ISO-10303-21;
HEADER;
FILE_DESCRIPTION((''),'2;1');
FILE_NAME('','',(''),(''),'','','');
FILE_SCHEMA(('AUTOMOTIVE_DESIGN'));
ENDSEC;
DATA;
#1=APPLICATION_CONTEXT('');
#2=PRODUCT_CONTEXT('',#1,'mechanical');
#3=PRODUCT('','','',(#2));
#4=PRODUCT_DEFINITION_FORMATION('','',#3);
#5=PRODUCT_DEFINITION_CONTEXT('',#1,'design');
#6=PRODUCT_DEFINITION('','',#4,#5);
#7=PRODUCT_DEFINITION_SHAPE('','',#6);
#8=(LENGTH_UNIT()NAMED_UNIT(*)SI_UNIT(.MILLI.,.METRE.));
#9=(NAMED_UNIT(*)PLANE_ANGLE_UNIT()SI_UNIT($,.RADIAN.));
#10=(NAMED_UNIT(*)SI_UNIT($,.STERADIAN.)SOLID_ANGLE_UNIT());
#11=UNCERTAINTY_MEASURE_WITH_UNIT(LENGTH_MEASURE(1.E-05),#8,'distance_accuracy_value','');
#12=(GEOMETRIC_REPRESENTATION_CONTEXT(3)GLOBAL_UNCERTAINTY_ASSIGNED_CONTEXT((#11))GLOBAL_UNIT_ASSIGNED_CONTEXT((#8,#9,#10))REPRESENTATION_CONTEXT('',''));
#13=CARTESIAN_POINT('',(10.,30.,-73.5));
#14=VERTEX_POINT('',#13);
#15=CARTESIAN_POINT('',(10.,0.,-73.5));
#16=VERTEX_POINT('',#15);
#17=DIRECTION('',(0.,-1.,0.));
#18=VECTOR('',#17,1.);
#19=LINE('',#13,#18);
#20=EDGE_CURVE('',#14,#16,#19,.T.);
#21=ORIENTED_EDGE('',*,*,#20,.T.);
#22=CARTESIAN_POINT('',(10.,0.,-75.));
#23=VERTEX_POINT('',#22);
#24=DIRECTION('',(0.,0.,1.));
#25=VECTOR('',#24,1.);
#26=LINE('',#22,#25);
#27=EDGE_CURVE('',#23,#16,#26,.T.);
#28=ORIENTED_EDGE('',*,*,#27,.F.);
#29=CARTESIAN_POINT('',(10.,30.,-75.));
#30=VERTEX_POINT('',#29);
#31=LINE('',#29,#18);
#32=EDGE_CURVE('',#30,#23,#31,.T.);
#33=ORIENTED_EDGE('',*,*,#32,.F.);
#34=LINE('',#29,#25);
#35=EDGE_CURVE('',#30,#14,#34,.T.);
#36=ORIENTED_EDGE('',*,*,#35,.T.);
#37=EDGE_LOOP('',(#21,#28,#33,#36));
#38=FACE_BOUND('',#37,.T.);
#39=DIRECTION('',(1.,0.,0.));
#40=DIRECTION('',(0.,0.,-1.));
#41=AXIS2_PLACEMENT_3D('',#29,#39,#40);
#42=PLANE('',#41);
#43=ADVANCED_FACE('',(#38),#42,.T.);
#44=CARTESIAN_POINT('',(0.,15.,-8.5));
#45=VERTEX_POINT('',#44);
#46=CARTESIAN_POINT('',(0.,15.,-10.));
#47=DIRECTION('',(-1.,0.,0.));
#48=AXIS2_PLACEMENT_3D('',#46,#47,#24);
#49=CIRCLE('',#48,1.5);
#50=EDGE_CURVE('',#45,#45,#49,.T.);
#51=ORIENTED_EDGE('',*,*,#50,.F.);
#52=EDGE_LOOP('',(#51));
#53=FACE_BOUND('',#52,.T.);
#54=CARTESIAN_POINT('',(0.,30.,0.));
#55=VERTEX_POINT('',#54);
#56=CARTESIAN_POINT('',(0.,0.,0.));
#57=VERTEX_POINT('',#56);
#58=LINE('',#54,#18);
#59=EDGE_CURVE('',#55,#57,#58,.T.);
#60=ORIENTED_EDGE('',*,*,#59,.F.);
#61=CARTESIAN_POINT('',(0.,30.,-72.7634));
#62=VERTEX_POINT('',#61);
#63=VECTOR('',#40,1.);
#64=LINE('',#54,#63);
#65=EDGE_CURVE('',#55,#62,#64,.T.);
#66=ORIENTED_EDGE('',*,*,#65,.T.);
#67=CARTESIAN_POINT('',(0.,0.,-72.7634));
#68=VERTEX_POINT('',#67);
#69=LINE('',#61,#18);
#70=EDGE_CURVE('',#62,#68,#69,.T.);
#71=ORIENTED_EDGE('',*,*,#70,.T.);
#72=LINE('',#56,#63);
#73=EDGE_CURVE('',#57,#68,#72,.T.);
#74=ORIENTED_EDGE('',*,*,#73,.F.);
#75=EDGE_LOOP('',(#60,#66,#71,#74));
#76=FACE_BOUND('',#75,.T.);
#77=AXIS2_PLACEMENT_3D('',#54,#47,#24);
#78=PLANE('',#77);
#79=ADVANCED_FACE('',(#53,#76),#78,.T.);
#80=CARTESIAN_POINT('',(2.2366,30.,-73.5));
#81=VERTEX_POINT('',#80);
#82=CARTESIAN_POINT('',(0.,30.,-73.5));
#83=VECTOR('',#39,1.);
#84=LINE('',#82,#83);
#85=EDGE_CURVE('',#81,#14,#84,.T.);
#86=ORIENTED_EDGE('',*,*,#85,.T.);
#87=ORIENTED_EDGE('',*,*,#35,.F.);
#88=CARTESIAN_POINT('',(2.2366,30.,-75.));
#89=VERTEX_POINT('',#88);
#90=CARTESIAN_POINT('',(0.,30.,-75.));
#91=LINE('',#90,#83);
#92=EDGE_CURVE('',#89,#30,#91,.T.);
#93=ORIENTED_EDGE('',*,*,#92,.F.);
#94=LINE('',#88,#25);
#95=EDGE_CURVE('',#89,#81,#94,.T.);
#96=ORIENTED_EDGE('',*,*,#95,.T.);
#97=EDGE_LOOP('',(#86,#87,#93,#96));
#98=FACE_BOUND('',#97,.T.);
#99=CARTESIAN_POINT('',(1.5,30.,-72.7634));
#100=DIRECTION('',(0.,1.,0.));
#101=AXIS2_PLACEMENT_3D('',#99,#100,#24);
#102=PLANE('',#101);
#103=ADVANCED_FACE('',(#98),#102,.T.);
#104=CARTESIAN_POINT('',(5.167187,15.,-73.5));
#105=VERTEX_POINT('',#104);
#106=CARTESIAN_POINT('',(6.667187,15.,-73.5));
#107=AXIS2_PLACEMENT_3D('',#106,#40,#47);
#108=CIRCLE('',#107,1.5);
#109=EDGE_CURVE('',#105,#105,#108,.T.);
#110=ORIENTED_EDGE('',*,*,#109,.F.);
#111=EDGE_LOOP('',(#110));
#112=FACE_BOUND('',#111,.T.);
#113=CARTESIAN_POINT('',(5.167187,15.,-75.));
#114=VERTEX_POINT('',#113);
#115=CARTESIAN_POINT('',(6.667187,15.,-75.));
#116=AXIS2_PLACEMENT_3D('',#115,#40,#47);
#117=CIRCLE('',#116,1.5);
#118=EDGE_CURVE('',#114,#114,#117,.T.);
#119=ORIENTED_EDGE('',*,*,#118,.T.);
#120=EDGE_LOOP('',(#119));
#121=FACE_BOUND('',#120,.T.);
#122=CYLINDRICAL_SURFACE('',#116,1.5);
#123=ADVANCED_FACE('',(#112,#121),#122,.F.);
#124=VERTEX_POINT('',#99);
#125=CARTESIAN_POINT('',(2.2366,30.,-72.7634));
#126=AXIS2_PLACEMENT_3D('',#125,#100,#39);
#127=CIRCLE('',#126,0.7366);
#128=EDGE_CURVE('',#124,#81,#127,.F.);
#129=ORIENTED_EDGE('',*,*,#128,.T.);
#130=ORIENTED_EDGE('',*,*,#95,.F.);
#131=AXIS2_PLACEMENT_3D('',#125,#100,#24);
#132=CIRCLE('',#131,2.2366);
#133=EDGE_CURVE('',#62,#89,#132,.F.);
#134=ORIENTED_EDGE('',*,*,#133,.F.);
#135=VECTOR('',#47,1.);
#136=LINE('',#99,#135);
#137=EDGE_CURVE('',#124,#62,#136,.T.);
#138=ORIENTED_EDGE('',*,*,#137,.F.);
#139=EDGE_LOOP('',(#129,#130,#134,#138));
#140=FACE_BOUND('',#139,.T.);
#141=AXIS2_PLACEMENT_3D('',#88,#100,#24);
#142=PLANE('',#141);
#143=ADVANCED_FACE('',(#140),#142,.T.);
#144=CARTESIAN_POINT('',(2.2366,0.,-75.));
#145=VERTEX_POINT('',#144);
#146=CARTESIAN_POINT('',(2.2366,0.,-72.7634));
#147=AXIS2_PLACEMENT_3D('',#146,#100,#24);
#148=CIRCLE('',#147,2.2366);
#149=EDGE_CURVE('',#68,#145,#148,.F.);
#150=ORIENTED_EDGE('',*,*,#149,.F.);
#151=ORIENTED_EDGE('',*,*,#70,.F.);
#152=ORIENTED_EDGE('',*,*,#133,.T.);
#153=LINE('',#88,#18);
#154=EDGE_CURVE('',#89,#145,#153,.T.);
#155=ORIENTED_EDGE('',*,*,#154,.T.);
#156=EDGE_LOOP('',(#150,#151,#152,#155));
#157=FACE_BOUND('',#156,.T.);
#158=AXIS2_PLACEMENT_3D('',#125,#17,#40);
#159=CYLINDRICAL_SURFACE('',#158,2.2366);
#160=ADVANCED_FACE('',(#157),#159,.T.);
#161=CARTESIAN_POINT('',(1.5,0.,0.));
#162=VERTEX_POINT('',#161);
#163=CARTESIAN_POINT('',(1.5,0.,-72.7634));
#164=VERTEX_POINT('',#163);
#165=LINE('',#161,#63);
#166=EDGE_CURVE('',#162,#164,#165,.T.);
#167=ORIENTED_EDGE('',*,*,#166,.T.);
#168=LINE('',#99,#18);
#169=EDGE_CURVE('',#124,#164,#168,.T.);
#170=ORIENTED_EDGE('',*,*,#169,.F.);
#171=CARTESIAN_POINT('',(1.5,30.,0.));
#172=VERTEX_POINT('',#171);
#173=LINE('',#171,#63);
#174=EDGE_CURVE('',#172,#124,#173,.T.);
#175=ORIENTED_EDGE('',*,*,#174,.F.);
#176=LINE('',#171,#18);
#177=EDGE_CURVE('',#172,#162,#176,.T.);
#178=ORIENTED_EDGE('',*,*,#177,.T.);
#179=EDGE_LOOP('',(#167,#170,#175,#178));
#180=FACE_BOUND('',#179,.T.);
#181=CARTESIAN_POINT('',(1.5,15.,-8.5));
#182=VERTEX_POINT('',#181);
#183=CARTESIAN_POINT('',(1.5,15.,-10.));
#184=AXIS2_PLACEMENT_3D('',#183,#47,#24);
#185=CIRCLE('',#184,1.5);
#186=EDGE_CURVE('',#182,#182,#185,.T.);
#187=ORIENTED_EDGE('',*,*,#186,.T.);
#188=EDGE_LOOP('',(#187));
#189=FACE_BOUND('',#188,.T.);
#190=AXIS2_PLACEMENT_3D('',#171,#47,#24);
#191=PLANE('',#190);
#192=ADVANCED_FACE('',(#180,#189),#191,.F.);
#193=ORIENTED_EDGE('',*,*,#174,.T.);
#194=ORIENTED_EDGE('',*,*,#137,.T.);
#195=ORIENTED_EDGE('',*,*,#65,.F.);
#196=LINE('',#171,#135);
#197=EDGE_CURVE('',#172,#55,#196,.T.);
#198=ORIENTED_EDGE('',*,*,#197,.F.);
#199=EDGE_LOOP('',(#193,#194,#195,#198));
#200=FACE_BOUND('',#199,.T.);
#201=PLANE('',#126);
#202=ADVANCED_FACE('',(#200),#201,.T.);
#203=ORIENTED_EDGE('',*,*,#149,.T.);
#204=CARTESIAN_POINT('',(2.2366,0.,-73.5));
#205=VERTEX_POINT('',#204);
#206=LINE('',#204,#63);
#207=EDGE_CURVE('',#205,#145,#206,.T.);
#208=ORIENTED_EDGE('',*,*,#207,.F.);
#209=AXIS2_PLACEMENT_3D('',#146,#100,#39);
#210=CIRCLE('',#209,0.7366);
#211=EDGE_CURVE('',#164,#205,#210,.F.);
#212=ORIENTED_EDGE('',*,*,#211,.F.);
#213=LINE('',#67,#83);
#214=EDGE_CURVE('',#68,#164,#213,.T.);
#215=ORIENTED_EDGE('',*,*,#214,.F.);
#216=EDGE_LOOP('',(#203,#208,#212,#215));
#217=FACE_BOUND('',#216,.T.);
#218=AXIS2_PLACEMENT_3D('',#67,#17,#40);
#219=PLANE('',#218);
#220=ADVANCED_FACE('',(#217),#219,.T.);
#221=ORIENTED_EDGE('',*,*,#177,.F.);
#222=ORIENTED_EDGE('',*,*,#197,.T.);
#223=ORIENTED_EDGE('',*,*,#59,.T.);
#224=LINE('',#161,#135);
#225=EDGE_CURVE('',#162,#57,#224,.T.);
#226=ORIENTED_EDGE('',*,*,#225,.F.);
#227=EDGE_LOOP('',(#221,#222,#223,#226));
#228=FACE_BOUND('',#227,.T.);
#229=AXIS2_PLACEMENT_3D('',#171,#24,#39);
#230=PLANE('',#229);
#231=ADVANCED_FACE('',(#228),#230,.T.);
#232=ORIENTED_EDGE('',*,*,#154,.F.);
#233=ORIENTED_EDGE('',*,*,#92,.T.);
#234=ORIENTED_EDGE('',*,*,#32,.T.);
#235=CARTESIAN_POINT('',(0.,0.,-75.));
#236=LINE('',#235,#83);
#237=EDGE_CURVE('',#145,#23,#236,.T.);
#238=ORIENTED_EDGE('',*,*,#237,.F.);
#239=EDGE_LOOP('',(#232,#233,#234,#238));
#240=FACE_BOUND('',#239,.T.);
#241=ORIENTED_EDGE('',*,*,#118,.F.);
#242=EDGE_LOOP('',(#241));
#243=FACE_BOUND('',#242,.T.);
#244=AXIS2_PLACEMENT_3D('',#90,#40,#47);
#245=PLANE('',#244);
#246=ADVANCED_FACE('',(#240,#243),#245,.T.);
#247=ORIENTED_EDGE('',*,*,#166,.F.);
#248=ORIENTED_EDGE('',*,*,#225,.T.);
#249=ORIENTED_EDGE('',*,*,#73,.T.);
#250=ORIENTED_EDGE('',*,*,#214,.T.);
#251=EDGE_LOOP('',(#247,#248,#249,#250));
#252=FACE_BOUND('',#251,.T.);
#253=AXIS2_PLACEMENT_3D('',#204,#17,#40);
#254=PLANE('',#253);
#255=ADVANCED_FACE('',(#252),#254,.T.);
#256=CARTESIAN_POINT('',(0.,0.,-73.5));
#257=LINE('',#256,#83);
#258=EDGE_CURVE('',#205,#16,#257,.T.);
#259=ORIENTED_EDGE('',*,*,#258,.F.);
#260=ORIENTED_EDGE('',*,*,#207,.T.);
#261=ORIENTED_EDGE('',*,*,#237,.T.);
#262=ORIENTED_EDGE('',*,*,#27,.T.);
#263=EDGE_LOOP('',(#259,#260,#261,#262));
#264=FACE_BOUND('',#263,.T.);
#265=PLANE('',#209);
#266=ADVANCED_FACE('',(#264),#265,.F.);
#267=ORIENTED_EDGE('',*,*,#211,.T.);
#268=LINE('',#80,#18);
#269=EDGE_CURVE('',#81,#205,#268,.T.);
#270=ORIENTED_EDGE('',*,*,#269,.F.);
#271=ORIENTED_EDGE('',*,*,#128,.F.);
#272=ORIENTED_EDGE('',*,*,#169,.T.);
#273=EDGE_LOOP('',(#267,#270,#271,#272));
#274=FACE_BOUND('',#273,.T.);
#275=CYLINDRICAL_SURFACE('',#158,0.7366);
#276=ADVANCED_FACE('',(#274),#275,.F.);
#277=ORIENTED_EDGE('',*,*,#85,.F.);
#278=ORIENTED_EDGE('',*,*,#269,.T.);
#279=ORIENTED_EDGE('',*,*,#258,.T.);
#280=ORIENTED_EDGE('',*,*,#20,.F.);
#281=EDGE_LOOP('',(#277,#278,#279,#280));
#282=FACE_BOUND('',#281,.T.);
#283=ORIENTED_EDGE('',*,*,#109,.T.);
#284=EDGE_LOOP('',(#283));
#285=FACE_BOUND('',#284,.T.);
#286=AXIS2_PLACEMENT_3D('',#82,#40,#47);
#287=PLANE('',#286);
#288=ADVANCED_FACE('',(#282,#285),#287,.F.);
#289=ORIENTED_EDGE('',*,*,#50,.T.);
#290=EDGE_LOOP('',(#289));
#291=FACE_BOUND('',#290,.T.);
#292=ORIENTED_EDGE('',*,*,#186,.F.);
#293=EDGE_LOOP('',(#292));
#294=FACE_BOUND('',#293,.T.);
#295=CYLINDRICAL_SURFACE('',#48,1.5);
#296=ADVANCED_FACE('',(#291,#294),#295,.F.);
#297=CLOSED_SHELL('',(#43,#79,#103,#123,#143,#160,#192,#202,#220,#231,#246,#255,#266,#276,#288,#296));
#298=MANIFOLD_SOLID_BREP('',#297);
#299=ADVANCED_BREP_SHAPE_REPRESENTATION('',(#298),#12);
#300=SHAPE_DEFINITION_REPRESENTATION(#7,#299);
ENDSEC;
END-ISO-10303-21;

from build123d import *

# Parameters (mm, degrees)
BASE_FLANGE1_DEPTH              = 30
F_3_0MM_PRESS_DOWEL_HOLE1_D     = 3
F_3_0MM_PRESS_DOWEL_HOLE2_D     = 3
F_3_0MM_PRESS_DOWEL_HOLE3_D     = 3
F_3_0MM_PRESS_DOWEL_HOLE3_DEPTH = 6
F_3_0MM_PRESS_DOWEL_HOLE3_TIP   = 0.901290929


# Sheet-metal steps are written as plain solids
with BuildPart() as part:
    # Sketch2 → Base-Flange1 (new body)
    with BuildSketch(Plane(origin=(0, 0, 0), x_dir=(1, 0, 0), z_dir=(0, 1, 0))):
        with BuildLine():
            Line((0, 0), (0, 72.7634))
            ThreePointArc((0, 72.7634), (0.655084973, 74.344915027), (2.2366, 75))
            Line((2.2366, 75), (10, 75))
            Line((10, 75), (10, 73.5))
            Line((10, 73.5), (2.2366, 73.5))
            ThreePointArc((2.2366, 73.5), (1.715745145, 73.284254855), (1.5, 72.7634))
            Line((1.5, 72.7634), (1.5, 0))
            Line((1.5, 0), (0, 0))
        make_face()
    extrude(amount=BASE_FLANGE1_DEPTH)

    # Ø3.0mm Press Dowel Hole1 (through all)
    with Locations(Plane(origin=(0, 0, -75), x_dir=(-1, 0, 0), z_dir=(0, 0, -1))):
        with Locations((-6.667186687, 15)):
            Hole(F_3_0MM_PRESS_DOWEL_HOLE1_D / 2)

    # Ø3.0mm Press Dowel Hole2 (through all)
    with Locations(Plane.ZY):
        with Locations((-10, 15)):
            Hole(F_3_0MM_PRESS_DOWEL_HOLE2_D / 2)

    # Ø3.0mm Press Dowel Hole3
    with Locations(Plane(origin=(-82.525513363, 241.531359221, -81), x_dir=(1, 0, 0), z_dir=(0, 0, -1))):
        with Locations((220.525513363, 156.531359221), (102.525513363, 181.531359221), (102.525513363, 271.531359221), (89.19270005, 226.531359221), (210.525513363, 317.793651488), (230.525513363, 317.793651488), (252.525513363, 320.462332131), (232.525513363, 300.462332131), (252.525513363, 132.600386311), (232.525513363, 152.600386311), (111.286271896, 136.531359221), (91.286271896, 136.531359221), (41.525513363, 196.432813402), (13.525513363, 196.432813402), (41.525513363, 138.767959221), (13.525513363, 138.767959221), (41.525513363, 256.62990504), (13.525513363, 256.62990504), (41.525513363, 314.294759221), (13.525513363, 314.294759221)):
            Hole(F_3_0MM_PRESS_DOWEL_HOLE3_D / 2, depth=F_3_0MM_PRESS_DOWEL_HOLE3_DEPTH)
            with Locations((0, 0, -(F_3_0MM_PRESS_DOWEL_HOLE3_DEPTH + F_3_0MM_PRESS_DOWEL_HOLE3_TIP / 2))):  # 118° drill point
                Cone(0, F_3_0MM_PRESS_DOWEL_HOLE3_D / 2, F_3_0MM_PRESS_DOWEL_HOLE3_TIP, mode=Mode.SUBTRACT)


solid = part.part
